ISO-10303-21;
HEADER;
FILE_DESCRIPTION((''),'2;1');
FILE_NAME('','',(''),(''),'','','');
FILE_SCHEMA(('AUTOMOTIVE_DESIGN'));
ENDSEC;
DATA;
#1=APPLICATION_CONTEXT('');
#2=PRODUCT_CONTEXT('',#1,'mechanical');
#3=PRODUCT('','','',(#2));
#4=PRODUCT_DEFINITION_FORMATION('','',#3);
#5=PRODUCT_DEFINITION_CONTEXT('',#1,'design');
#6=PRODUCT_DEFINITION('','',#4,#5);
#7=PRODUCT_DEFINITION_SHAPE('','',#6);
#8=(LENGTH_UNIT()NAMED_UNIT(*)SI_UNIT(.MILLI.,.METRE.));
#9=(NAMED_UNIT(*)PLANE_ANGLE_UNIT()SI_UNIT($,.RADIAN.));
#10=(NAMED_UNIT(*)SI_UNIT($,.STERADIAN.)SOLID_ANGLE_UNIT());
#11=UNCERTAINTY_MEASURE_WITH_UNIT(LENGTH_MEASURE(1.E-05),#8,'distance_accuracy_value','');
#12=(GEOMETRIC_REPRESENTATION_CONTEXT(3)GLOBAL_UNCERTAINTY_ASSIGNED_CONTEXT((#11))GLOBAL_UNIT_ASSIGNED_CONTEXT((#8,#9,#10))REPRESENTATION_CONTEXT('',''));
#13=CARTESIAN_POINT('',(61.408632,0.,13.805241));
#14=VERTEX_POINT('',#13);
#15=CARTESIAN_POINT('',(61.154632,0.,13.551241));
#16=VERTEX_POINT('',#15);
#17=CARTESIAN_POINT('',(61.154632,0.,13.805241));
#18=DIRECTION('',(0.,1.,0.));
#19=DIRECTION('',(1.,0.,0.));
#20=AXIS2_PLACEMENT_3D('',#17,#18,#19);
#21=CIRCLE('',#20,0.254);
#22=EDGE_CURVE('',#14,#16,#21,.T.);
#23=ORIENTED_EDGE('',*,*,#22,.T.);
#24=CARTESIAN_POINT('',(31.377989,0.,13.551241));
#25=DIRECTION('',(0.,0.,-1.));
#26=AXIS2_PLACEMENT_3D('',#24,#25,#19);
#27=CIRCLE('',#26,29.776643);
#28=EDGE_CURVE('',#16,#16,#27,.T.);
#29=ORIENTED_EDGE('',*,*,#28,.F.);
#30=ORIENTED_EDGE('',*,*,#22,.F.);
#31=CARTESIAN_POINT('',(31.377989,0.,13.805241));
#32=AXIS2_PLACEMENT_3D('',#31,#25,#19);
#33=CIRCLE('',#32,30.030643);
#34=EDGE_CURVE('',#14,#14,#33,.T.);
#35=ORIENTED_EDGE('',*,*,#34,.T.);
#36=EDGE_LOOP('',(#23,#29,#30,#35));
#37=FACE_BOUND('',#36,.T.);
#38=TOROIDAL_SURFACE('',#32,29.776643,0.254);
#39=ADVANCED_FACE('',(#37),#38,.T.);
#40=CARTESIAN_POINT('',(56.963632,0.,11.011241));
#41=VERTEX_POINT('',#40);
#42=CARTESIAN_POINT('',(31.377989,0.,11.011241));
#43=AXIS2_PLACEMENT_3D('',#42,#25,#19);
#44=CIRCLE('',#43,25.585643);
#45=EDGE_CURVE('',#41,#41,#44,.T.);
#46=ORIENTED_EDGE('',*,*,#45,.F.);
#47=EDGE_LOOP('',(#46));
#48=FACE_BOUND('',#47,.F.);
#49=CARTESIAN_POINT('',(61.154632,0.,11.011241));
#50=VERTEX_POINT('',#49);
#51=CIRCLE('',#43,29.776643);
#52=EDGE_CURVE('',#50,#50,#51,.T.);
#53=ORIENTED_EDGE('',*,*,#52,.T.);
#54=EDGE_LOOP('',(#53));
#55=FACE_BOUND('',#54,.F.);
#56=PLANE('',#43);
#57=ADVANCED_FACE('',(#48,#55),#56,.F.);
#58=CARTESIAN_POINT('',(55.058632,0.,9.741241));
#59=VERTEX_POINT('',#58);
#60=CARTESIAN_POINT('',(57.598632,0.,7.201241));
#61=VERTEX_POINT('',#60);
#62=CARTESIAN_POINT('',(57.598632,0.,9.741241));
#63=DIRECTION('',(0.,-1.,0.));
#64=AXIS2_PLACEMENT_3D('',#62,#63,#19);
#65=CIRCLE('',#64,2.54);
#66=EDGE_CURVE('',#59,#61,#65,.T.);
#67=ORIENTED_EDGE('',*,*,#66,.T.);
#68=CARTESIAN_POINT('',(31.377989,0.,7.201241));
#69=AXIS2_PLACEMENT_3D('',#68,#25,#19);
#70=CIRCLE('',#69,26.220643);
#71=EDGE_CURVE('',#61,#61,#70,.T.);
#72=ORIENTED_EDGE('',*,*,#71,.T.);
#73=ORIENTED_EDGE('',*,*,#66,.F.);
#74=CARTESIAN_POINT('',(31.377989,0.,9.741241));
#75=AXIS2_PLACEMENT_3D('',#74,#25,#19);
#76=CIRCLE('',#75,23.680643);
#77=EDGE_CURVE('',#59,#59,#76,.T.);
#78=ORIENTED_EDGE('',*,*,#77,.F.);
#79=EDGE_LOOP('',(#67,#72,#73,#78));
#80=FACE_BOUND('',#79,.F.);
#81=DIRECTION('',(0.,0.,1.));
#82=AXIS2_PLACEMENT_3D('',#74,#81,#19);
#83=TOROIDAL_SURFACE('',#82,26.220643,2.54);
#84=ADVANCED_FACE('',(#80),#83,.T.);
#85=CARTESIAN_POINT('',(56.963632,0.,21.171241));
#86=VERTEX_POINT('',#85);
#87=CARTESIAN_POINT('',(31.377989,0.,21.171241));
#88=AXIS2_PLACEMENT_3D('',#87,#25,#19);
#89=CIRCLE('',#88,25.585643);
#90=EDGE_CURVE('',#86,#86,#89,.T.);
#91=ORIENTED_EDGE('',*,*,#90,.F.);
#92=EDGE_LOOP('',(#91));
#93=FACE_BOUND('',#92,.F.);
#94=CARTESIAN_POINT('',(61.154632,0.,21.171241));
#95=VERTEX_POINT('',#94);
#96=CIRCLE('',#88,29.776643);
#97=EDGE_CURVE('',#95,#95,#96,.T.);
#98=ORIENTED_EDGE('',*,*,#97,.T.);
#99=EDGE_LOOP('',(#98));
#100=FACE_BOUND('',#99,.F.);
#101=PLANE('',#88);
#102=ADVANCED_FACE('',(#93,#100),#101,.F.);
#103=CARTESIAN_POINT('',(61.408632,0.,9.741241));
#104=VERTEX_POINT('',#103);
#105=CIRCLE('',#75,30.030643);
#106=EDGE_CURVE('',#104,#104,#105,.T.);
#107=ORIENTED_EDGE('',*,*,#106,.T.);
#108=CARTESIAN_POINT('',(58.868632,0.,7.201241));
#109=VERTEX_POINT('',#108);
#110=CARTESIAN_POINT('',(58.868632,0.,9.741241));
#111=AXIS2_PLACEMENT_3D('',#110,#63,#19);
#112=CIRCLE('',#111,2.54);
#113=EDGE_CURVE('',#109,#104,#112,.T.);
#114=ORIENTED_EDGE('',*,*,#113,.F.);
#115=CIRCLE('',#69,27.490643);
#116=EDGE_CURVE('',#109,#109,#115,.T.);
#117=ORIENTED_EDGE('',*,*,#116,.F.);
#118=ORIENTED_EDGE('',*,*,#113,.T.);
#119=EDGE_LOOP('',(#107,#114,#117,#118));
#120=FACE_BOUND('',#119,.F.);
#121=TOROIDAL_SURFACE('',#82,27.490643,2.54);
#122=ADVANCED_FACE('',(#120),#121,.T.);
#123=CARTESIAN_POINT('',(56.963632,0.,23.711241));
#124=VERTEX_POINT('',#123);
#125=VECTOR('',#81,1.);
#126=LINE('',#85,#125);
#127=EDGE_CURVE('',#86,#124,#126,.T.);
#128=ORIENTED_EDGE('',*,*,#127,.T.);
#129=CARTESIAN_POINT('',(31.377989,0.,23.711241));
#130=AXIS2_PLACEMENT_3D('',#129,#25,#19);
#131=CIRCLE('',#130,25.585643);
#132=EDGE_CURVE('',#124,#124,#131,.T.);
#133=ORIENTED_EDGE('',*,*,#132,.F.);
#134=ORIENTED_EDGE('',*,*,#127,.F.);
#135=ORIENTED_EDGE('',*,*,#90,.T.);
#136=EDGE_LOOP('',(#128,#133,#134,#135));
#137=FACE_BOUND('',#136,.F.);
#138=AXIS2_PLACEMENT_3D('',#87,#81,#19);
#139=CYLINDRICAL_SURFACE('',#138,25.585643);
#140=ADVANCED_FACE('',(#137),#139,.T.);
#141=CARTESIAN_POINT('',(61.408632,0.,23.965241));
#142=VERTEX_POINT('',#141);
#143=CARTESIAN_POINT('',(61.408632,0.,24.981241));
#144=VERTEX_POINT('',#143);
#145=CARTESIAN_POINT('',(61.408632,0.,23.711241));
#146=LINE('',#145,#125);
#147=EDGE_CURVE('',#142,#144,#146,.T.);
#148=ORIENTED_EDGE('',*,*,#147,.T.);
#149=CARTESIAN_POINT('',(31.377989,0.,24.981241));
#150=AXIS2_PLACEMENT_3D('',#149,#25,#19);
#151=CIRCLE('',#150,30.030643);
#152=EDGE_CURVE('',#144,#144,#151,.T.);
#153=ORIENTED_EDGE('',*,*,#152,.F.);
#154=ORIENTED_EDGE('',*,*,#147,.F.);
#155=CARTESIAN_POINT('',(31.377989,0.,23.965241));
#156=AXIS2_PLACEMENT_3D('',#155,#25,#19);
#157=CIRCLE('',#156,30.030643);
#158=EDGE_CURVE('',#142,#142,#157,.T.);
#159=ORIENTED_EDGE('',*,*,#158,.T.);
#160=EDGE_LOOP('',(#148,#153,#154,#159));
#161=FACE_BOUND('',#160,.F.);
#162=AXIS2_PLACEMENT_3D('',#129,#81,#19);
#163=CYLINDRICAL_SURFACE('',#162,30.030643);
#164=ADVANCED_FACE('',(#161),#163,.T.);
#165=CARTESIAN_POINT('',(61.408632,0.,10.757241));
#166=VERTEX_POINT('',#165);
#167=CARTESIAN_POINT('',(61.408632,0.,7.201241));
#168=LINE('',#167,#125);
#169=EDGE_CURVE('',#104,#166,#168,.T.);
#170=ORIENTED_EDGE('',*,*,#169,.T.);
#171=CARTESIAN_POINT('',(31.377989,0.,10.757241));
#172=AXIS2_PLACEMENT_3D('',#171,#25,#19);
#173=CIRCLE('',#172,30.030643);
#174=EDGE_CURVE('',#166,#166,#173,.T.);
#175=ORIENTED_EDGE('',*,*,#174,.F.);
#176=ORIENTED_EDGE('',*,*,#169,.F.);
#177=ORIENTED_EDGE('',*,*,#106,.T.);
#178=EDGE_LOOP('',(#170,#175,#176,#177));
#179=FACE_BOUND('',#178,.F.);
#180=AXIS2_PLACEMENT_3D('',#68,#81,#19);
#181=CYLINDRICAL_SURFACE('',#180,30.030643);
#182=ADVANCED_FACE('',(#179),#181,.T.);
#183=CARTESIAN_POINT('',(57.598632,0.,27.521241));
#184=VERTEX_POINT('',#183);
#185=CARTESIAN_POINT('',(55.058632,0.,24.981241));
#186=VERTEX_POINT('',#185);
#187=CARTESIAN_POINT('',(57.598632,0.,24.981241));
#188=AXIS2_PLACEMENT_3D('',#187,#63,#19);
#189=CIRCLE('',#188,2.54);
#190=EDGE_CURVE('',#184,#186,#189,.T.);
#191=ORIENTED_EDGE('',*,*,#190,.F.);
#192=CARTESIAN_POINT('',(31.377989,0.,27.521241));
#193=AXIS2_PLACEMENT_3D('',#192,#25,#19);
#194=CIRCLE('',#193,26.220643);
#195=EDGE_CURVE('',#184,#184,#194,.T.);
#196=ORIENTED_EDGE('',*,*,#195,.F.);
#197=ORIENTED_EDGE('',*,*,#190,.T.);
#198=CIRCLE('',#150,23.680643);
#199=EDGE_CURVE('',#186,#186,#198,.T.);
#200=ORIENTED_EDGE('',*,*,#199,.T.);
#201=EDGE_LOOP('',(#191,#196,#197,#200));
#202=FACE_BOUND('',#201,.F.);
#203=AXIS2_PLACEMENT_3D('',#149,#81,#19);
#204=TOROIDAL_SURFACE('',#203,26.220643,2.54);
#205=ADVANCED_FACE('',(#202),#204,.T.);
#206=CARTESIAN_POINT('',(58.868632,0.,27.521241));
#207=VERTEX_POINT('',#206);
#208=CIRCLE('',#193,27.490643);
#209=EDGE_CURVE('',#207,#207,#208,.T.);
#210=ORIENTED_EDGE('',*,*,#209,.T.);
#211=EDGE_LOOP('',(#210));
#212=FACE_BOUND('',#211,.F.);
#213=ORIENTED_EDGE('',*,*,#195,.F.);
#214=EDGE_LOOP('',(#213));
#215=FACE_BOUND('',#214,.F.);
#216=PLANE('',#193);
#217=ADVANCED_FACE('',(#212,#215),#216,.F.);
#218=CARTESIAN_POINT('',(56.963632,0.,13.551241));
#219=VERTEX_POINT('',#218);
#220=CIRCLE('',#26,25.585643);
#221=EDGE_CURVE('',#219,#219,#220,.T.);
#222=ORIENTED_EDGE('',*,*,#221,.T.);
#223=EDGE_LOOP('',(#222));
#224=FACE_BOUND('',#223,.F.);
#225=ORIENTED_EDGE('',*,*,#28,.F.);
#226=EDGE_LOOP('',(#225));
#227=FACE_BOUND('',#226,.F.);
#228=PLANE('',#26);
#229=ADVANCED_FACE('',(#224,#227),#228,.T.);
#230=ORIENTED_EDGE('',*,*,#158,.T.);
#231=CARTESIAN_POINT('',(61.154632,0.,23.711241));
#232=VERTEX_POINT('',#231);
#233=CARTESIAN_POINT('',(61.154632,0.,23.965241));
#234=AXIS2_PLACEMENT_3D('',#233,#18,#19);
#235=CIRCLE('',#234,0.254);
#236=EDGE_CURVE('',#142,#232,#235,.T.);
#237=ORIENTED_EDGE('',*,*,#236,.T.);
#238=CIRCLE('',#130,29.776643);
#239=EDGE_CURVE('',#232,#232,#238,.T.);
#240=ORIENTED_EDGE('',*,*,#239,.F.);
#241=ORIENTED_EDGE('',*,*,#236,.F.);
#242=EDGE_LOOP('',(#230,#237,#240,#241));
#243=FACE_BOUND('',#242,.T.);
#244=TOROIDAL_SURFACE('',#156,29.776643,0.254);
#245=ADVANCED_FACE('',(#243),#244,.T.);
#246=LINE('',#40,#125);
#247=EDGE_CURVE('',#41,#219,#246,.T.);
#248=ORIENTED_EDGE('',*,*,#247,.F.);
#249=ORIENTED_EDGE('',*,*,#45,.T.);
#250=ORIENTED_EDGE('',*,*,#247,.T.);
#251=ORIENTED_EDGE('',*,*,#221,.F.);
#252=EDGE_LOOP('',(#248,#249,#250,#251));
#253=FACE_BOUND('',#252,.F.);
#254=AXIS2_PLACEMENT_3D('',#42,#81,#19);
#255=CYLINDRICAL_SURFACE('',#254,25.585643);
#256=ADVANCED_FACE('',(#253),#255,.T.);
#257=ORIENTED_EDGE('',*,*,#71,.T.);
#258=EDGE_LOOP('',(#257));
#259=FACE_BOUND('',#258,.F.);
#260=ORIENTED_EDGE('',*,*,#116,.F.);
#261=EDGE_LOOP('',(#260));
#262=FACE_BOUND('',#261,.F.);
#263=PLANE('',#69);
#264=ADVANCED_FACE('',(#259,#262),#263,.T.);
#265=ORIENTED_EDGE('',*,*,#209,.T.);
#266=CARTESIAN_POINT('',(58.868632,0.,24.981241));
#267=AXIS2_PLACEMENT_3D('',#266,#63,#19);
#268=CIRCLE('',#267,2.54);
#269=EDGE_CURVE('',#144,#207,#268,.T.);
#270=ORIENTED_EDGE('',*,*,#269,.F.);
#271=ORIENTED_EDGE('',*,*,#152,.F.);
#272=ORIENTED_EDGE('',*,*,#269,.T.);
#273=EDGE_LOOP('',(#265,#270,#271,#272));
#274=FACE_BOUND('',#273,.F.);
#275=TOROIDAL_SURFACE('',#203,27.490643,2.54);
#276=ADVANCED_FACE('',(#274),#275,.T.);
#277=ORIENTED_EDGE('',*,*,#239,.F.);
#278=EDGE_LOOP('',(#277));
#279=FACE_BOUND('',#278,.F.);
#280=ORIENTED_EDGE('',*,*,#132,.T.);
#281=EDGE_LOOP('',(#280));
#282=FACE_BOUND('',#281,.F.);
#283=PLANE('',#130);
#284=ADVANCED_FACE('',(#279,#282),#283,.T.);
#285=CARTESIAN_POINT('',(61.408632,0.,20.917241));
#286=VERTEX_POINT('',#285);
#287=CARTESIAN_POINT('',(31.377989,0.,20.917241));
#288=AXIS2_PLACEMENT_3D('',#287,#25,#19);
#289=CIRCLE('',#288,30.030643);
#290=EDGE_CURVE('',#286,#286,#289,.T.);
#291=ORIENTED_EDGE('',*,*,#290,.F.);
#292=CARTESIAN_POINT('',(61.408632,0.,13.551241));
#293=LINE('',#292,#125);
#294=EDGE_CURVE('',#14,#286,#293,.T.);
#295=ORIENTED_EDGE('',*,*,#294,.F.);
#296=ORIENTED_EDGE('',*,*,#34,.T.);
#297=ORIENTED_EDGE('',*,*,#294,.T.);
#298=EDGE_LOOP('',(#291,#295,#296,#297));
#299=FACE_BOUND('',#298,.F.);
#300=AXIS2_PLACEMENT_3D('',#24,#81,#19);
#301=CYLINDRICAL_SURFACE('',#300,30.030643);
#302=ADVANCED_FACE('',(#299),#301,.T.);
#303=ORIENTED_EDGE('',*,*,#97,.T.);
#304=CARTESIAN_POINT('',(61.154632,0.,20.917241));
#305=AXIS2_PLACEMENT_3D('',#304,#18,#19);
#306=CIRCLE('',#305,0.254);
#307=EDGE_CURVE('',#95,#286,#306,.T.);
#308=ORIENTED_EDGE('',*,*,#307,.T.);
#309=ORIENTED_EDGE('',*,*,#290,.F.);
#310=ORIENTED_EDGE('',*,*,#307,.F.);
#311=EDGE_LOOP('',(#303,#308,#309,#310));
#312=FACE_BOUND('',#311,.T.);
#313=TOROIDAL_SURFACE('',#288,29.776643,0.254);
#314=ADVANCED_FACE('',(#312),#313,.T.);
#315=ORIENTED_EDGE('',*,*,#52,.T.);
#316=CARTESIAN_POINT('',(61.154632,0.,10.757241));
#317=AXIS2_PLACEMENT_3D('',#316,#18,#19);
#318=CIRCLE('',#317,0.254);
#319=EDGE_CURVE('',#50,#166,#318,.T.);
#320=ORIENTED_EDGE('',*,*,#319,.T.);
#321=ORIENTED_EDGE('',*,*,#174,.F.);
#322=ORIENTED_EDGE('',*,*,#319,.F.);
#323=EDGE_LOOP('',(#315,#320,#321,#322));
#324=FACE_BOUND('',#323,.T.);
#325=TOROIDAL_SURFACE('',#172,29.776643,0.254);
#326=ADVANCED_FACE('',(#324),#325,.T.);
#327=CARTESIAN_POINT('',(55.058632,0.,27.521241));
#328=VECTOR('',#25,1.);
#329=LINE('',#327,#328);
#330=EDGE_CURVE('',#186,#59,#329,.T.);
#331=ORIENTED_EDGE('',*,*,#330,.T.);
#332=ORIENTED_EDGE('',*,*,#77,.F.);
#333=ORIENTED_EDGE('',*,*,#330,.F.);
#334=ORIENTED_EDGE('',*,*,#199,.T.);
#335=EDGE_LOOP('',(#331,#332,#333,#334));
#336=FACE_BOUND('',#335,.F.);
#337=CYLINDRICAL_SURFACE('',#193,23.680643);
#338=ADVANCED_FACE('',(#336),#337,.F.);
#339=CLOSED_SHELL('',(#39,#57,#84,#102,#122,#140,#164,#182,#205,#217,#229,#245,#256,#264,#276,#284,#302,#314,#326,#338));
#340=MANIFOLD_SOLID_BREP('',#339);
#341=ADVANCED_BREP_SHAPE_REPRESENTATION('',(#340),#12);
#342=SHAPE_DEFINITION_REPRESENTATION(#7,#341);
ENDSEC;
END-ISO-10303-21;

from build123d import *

# Parameters (mm, degrees)
F2_R = 2.54
F3_R = 0.254


# Not quite as in the source:
# - a feature of the source that left no trace in its solid (it failed there, or was rolled back) is left out


with BuildPart() as f1:
    # F0 (on Front) → F1 (revolve)
    with BuildSketch(Plane.XZ):
        Polygon((61.408632046, 23.7112408589), (61.408632046, 27.5212408589), (55.058632046, 27.5212408589), (55.058632046, 7.2012408589), (61.408632046, 7.2012408589), (61.408632046, 11.0112408589), (56.963632046, 11.0112408589), (56.963632046, 13.5512408589), (61.408632046, 13.5512408589), (61.408632046, 21.1712408589), (56.963632046, 21.1712408589), (56.963632046, 23.7112408589), align=None)
    revolve(axis=Axis((31.3779890053, 0, 18.6312408589), (0, 0, -1)))

    # F2
    f2_edges = [f1.edges().sort_by_distance(p)[0] for p in [
        (1.347346, 0, 27.521241),
        (7.697346, 0, 27.521241),
        (7.697346, 0, 7.201241),
        (1.347346, 0, 7.201241),
    ]]
    fillet(f2_edges, radius=F2_R)

    # F3
    f3_edges = [f1.edges().sort_by_distance(p)[0] for p in [
        (1.347346, 0, 21.171241),
        (1.347346, 0, 23.711241),
        (1.347346, 0, 13.551241),
        (1.347346, 0, 11.011241),
    ]]
    fillet(f3_edges, radius=F3_R)


solid = f1.part
